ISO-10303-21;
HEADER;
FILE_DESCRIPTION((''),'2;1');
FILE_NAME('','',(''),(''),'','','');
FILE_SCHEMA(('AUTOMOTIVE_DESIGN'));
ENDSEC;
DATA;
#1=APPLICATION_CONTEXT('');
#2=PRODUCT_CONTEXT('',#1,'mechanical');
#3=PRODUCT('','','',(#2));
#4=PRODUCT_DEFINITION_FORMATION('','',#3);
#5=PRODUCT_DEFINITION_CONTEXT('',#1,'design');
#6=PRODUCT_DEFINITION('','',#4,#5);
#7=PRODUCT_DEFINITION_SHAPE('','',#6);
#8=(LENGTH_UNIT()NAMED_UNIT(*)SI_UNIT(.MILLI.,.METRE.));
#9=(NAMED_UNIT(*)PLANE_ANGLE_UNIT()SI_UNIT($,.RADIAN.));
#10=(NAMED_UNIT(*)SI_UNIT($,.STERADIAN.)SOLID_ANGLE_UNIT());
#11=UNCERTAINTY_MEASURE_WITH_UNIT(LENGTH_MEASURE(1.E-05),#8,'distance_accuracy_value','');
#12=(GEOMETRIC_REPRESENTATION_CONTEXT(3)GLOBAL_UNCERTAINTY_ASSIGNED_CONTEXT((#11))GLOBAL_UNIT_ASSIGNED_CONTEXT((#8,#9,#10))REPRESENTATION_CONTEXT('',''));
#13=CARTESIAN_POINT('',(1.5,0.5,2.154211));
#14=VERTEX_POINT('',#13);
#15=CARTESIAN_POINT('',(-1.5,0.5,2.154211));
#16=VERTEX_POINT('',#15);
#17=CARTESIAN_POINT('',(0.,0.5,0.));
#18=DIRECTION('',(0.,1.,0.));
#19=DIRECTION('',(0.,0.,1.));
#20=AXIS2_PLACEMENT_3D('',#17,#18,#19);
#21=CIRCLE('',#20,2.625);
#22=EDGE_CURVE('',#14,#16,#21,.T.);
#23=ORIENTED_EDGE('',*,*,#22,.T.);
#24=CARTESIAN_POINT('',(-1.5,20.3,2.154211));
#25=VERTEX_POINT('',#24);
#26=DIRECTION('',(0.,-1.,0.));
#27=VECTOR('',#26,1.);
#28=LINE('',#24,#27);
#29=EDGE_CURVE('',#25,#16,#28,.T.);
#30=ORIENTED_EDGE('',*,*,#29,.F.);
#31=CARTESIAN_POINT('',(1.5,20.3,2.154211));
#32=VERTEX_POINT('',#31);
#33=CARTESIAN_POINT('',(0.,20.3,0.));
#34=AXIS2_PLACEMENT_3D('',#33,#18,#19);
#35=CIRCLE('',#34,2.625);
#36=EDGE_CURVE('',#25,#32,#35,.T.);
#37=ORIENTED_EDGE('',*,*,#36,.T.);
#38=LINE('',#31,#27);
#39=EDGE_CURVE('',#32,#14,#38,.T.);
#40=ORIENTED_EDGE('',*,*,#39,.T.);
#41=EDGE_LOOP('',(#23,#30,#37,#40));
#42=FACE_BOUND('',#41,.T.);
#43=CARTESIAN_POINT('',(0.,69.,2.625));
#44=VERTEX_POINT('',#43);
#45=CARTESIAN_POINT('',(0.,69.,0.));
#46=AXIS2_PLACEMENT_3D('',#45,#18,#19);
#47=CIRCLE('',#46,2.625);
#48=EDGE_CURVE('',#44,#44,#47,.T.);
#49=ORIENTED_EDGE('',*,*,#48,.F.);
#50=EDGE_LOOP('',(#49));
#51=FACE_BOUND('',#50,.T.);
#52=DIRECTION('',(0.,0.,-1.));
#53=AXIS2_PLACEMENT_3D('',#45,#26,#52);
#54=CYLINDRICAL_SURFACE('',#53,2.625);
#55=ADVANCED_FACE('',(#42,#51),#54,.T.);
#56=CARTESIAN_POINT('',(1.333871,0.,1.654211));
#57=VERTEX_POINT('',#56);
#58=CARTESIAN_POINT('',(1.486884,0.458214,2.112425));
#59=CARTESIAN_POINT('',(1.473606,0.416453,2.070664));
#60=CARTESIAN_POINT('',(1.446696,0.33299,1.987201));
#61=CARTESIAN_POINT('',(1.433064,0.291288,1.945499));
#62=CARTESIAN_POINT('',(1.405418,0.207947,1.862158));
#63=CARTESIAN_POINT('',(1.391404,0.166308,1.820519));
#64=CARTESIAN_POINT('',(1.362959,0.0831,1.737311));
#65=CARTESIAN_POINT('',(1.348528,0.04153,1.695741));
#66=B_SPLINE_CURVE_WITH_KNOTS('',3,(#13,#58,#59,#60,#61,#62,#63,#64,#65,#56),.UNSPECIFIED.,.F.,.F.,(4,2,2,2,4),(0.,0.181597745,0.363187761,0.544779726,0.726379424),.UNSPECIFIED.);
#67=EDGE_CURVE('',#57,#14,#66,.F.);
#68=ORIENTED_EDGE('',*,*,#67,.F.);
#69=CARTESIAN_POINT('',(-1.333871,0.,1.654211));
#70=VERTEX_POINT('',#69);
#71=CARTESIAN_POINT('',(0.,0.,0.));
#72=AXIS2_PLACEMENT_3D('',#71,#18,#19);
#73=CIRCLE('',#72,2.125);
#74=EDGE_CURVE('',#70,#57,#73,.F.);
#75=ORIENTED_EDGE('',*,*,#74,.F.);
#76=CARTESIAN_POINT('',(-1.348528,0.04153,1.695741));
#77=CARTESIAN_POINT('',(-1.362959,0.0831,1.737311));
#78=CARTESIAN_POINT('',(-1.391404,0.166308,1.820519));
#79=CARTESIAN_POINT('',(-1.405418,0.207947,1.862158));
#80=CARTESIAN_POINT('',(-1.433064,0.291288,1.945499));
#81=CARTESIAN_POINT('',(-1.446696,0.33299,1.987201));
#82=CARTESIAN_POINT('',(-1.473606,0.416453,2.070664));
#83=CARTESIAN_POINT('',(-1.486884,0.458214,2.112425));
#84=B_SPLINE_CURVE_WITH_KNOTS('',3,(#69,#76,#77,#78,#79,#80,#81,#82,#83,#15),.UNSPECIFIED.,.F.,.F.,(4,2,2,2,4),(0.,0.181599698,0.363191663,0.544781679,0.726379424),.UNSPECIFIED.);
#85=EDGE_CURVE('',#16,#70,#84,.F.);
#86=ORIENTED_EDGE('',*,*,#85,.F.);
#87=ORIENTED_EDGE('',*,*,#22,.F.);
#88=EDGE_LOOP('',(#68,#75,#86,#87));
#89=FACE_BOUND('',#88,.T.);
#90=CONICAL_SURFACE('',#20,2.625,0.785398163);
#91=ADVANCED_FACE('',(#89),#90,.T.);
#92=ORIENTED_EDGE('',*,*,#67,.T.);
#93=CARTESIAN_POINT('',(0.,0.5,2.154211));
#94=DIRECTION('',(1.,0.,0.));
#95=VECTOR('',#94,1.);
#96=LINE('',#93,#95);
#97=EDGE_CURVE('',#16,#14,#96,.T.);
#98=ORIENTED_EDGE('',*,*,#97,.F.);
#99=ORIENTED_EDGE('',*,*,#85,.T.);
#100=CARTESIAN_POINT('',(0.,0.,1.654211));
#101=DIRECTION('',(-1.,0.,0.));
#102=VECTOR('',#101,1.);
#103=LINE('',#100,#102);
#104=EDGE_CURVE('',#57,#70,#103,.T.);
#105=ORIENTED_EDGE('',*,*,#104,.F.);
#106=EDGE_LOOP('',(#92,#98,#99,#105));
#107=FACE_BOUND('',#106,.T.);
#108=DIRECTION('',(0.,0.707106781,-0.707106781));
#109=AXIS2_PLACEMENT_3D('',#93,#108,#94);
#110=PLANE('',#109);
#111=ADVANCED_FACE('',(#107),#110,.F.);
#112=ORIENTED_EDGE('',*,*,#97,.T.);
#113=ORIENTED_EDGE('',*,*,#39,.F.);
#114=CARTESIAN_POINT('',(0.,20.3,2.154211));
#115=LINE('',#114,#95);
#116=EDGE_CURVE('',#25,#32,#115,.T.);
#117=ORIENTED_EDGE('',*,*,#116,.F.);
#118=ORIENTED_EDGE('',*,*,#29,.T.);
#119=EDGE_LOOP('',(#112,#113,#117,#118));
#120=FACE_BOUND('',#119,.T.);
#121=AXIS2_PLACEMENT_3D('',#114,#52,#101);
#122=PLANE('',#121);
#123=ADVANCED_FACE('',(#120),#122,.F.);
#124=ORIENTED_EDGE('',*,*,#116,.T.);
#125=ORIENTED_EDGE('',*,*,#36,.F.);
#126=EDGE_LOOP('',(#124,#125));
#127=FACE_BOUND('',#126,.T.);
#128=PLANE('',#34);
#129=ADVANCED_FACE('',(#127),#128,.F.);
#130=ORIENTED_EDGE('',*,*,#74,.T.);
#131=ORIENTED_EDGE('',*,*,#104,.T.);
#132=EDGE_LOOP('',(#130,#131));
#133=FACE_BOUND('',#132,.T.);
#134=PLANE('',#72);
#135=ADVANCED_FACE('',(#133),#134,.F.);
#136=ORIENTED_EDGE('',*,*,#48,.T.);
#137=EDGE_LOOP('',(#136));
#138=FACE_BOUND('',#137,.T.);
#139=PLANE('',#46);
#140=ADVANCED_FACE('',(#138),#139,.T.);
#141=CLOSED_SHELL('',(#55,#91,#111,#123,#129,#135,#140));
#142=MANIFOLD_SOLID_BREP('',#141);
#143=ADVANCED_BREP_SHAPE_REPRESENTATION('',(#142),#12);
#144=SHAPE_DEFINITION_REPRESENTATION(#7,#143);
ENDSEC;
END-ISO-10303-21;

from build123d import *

# Parameters (mm, degrees)
BOSS_EXTRUDE1_DEPTH = 69
CUT_EXTRUDE1_DEPTH  = 20.3
CHAMFER1_SIZE       = 0.5


with BuildPart() as part:
    # Sketch1 → Boss-Extrude1 (new body)
    with BuildSketch(Plane(origin=(0, 0, 0), x_dir=(1, 0, 0), z_dir=(0, 1, 0))):
        with BuildLine():
            ThreePointArc((2.625, 0), (-1.215138881, 2.326813809), (-1.5, -2.154210992))
            Line((-1.5, -2.154210992), (1.5, -2.154210992))
            ThreePointArc((1.5, -2.154210992), (2.326813809, -1.215138881), (2.625, 0))
        make_face()
        with BuildLine():
            Line((1.5, -2.154210992), (-1.5, -2.154210992))
            ThreePointArc((-1.5, -2.154210992), (0, -2.625), (1.5, -2.154210992))
        make_face()
    extrude(amount=BOSS_EXTRUDE1_DEPTH)

    # Sketch1<3> → Cut-Extrude1 (cut)
    with BuildSketch(Plane(origin=(0, 0, 0), x_dir=(1, 0, 0), z_dir=(0, 1, 0))):
        with BuildLine():
            Line((1.5, -2.154210992), (-1.5, -2.154210992))
            ThreePointArc((-1.5, -2.154210992), (0, -2.625), (1.5, -2.154210992))
        make_face()
    extrude(amount=CUT_EXTRUDE1_DEPTH, mode=Mode.SUBTRACT)

    # Chamfer1
    # the kernel refuses this chamfer: 0.5 mm, written as the material it takes off along each edge
    with BuildSketch(Plane(origin=(2.785841494, 0, 2.154210992), x_dir=(0, 0.9996219169112968, 0.027495876610586494), z_dir=(-1, 0, 0))) as chamfer1_piece_1:
        Polygon((CHAMFER1_SIZE * 0.999621916911, CHAMFER1_SIZE * 0.0274958766106), (-CHAMFER1_SIZE * 0.0274958766106, CHAMFER1_SIZE * 0.999621916911), (0, 0), align=None)
    extrude(amount=5.571682988, mode=Mode.SUBTRACT)
    with BuildSketch(Plane(origin=(0, 0, 0), x_dir=(0.11608616482785569, 0, 0.9932391465984212), z_dir=(-0.9932391465984212, 0, 0.11608616482785569))) as chamfer1_piece_2:
        Polygon((2.625, CHAMFER1_SIZE), (2.625 - CHAMFER1_SIZE, 0), (2.625, 0), align=None)
    revolve(axis=Axis((0, 0, 0), (0, 1, 0)), revolution_arc=346.667445344, mode=Mode.SUBTRACT)


solid = part.part
